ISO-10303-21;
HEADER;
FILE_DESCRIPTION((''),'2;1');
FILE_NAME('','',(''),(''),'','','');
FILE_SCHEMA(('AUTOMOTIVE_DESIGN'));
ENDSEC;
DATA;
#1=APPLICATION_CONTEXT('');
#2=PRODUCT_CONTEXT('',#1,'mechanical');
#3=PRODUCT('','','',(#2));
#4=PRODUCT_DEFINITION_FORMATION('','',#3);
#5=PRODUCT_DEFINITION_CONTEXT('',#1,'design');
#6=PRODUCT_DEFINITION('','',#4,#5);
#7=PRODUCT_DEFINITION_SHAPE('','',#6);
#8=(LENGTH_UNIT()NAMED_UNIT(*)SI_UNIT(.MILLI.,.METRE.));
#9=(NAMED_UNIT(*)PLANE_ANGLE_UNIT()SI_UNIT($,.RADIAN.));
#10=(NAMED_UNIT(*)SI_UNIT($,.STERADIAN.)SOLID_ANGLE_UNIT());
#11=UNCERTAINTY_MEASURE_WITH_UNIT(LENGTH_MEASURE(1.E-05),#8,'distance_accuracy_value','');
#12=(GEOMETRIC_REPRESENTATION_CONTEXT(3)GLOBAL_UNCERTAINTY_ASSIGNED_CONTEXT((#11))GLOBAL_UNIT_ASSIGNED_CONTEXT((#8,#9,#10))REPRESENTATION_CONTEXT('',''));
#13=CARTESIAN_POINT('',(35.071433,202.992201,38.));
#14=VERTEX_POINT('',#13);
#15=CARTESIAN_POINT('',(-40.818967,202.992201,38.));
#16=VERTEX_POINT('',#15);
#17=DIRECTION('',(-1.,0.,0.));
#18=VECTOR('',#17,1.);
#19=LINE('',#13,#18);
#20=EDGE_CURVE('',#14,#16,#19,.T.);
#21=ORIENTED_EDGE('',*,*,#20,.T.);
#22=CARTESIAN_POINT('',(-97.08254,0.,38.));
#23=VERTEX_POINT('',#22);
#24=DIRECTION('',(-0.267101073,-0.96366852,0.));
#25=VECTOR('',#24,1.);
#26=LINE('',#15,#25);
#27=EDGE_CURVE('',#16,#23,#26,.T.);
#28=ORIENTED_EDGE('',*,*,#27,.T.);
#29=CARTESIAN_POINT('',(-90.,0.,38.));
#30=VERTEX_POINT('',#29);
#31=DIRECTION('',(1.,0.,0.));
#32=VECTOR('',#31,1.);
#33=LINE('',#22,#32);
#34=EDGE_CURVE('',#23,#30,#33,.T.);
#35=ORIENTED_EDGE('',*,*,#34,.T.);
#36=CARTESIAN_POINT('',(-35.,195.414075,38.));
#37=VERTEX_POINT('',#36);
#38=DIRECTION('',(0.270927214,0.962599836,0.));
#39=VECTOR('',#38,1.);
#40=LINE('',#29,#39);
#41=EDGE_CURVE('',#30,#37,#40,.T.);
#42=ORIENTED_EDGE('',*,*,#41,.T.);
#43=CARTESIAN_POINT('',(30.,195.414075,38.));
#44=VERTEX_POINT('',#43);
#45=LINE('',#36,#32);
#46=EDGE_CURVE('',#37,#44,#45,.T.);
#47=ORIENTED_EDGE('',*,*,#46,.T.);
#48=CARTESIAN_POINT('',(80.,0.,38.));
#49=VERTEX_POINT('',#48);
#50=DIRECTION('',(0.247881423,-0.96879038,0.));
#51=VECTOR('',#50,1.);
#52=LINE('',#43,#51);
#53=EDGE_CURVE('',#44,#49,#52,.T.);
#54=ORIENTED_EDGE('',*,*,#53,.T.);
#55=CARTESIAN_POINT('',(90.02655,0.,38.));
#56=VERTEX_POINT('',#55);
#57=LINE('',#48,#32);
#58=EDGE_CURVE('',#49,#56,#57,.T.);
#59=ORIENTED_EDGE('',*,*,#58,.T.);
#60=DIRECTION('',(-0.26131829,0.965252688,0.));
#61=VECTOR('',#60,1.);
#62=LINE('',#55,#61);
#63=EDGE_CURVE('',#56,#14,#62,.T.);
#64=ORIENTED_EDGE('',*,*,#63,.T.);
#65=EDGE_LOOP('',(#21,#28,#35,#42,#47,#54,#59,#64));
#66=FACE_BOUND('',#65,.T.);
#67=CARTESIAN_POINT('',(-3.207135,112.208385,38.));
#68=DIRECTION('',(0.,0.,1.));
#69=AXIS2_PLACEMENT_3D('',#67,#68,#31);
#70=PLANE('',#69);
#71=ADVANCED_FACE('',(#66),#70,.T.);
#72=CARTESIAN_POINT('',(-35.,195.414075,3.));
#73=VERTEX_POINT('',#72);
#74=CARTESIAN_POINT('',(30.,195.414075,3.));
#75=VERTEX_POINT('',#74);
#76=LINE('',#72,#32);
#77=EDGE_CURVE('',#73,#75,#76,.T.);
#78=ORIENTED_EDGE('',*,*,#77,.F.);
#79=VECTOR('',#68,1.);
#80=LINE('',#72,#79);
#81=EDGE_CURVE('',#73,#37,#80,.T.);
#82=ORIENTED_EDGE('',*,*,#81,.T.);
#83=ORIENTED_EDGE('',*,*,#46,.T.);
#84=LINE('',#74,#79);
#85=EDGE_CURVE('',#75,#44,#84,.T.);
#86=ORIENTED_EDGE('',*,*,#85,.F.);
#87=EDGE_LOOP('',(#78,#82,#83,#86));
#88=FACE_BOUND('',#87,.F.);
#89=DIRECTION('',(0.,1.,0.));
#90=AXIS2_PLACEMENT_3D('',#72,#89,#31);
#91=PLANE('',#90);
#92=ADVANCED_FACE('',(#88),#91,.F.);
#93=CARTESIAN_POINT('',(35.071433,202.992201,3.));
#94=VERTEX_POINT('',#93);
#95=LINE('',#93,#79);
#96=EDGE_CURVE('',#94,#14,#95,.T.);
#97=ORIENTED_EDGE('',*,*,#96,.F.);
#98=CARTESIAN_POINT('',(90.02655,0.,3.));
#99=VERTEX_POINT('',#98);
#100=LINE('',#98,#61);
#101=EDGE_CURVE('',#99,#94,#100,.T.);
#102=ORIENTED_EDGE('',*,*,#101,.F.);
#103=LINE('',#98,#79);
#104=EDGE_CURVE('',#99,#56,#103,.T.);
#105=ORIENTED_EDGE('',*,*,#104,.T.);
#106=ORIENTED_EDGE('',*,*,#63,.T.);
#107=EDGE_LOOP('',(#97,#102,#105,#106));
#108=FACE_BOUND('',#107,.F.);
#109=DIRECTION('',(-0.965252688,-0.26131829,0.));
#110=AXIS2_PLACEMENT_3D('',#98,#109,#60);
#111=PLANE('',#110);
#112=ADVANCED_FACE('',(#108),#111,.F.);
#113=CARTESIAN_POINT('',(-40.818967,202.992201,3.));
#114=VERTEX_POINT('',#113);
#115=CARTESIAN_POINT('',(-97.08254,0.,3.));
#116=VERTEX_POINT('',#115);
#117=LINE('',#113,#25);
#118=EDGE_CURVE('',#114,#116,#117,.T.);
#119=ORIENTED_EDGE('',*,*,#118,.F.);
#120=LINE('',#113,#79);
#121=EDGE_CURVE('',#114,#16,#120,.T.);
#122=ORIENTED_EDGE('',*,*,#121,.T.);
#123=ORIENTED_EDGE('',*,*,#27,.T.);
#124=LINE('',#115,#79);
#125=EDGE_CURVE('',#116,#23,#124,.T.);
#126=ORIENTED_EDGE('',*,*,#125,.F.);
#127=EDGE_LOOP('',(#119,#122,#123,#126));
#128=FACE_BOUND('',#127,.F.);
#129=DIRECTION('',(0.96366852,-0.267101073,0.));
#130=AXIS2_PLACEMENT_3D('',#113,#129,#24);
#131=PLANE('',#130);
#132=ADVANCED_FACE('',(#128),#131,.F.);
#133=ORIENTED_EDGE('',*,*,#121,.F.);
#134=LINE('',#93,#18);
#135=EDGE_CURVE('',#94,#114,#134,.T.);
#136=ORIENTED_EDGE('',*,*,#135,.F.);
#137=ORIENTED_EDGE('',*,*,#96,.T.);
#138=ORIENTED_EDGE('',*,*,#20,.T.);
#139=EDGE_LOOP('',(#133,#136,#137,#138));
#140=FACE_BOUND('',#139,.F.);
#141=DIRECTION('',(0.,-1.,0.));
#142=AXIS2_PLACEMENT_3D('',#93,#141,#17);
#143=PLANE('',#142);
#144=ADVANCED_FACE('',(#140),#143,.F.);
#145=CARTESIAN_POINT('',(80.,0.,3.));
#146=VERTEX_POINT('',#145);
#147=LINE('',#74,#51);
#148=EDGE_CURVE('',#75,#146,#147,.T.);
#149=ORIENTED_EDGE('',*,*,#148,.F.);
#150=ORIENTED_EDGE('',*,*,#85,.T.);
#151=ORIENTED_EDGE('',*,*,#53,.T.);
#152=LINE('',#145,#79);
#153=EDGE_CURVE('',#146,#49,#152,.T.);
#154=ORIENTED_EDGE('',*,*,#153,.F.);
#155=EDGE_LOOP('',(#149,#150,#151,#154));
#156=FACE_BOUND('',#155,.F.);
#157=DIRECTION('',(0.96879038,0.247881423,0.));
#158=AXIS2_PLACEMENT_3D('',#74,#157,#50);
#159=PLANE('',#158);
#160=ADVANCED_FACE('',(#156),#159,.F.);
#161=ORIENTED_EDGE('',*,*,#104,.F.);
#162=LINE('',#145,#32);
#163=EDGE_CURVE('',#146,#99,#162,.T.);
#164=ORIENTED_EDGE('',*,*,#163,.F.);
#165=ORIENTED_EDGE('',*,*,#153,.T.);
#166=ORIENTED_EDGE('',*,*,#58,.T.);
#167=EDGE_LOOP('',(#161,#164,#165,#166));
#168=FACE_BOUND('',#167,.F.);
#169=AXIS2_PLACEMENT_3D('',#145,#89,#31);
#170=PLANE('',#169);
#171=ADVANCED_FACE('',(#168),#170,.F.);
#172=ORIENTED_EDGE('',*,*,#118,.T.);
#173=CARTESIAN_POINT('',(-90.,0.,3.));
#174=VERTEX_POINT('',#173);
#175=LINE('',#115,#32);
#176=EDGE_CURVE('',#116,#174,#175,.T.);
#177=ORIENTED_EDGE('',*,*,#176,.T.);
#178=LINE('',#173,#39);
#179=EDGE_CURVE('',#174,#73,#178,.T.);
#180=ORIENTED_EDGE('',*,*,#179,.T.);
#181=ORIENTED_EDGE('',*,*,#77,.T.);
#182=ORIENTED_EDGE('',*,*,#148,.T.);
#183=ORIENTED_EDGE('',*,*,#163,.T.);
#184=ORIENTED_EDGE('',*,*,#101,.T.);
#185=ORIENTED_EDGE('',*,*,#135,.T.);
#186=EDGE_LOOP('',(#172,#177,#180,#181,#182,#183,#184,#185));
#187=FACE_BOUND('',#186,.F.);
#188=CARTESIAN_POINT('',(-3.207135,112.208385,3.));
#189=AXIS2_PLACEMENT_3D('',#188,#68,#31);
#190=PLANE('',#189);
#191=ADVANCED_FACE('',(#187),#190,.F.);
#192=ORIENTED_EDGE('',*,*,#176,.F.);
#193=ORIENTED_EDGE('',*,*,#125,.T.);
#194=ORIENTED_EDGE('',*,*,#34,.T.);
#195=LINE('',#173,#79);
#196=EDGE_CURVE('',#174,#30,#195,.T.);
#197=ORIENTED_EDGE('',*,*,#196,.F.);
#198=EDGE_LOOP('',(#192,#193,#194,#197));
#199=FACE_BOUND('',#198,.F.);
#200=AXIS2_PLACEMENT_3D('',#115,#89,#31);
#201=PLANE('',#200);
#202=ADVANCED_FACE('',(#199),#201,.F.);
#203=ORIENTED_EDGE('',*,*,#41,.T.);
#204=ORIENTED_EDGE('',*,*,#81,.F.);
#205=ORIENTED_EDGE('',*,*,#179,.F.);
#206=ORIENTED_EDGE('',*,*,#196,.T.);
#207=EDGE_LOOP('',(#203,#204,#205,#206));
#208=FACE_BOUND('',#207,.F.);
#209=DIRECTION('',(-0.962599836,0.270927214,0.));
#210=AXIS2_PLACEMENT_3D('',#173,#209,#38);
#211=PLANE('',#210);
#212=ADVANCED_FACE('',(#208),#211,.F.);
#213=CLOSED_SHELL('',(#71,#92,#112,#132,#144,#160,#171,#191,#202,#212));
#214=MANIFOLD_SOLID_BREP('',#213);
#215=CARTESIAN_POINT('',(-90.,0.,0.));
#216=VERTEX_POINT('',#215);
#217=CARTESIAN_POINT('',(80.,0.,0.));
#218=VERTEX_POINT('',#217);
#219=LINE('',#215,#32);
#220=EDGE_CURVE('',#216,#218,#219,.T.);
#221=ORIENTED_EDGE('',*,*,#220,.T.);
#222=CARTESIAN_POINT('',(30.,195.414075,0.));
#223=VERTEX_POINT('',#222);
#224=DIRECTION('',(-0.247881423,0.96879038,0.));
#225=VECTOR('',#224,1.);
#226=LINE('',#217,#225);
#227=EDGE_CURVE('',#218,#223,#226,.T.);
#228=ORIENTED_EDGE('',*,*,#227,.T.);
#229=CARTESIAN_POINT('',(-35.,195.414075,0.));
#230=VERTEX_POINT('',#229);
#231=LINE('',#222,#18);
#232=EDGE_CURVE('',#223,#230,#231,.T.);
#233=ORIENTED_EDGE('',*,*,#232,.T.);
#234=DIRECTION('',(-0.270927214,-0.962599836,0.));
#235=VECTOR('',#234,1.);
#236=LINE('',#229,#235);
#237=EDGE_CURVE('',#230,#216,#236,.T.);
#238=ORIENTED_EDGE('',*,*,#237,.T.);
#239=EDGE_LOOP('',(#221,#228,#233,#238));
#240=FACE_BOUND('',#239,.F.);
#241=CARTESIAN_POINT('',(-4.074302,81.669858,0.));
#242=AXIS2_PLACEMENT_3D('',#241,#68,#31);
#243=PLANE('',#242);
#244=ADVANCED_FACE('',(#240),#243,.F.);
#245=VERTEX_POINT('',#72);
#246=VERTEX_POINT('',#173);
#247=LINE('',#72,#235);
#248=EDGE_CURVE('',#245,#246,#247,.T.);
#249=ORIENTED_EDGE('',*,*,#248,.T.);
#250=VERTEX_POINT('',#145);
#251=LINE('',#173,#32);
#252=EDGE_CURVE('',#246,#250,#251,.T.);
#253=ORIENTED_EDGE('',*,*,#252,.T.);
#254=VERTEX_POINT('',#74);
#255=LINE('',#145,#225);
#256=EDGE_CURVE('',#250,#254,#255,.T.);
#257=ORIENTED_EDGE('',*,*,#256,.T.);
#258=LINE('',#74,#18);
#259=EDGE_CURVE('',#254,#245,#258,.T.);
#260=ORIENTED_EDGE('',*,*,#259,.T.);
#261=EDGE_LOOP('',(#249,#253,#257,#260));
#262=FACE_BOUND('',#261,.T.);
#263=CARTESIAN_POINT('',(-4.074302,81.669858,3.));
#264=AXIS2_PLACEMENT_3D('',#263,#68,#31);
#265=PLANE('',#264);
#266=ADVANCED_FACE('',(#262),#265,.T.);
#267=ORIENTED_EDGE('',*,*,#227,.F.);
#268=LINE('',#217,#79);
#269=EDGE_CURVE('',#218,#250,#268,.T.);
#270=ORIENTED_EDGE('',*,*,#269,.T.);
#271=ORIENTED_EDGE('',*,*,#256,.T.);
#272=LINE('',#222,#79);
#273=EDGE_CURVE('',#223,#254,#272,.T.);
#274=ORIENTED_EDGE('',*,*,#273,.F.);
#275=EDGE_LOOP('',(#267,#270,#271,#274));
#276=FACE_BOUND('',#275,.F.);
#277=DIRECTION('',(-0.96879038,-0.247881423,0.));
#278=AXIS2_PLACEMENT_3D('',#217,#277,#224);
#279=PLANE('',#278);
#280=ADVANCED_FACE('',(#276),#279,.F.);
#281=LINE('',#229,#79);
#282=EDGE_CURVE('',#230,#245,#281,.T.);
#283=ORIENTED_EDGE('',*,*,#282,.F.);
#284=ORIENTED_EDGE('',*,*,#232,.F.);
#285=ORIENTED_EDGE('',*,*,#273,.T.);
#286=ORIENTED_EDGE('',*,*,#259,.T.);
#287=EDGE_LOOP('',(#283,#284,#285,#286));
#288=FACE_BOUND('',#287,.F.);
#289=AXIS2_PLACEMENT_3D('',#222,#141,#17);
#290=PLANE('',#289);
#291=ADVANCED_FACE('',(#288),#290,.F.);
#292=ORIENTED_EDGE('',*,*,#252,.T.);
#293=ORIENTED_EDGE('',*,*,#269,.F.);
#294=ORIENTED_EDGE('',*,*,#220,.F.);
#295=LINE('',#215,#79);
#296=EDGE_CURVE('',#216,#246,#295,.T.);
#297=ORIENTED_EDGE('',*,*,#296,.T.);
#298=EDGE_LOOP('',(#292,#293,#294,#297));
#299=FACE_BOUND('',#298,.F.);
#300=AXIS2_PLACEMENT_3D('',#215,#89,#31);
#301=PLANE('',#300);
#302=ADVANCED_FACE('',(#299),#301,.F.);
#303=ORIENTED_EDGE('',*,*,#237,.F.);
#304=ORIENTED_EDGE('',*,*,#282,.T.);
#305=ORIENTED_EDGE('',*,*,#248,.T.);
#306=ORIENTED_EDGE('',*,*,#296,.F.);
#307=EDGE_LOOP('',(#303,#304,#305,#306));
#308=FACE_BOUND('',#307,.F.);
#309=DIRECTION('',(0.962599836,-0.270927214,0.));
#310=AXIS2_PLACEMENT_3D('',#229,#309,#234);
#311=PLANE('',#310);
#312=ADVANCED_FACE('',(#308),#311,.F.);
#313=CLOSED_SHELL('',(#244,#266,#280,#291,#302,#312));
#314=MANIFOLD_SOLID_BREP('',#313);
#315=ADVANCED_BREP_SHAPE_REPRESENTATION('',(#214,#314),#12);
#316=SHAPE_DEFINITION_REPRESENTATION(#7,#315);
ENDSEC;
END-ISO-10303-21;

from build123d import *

# Parameters (mm, degrees)
F1_DEPTH = 3
F3_DEPTH = 343
F5_DEPTH = 35


# Not quite as in the source:
# - an extrude ends at something that could not be found from the text; its depth is read off the source's solid


with BuildPart() as f1:
    # F0 (on Top) → F1 (new body)
    with BuildSketch(Plane.XY):
        Polygon((30, 195.4140751933), (-35, 195.4140751933), (-90, 0), (0, 0), (80, 0), align=None)
    extrude(amount=F1_DEPTH)

    # F2 (on Top) → F3 (cut, through all)
    with BuildSketch(Plane.XY):
        with BuildLine():
            ThreePointArc((0, 109.7888334103), (7.3847296102, 112.8476885693), (10.4435847692, 120.2324181795))
            ThreePointArc((10.4435847692, 120.2324181795), (-7.3847296102, 127.6171477897), (0, 109.7888334103))
        make_face()
    extrude(amount=-F3_DEPTH, mode=Mode.SUBTRACT)


with BuildPart() as f5:
    # F4 (on face) → F5 (new body)
    with BuildSketch(Plane.XY.offset(3)):
        Polygon((-40.8189669251, 202.9922008514), (-97.0825403929, 0), (-90, 0), (-35, 195.4140751933), (30, 195.4140751933), (80, 0), (90.0265499949, 0), (35.0714325905, 202.9922008514), align=None)
    extrude(amount=F5_DEPTH)


solid = Compound([f1.part, f5.part])
